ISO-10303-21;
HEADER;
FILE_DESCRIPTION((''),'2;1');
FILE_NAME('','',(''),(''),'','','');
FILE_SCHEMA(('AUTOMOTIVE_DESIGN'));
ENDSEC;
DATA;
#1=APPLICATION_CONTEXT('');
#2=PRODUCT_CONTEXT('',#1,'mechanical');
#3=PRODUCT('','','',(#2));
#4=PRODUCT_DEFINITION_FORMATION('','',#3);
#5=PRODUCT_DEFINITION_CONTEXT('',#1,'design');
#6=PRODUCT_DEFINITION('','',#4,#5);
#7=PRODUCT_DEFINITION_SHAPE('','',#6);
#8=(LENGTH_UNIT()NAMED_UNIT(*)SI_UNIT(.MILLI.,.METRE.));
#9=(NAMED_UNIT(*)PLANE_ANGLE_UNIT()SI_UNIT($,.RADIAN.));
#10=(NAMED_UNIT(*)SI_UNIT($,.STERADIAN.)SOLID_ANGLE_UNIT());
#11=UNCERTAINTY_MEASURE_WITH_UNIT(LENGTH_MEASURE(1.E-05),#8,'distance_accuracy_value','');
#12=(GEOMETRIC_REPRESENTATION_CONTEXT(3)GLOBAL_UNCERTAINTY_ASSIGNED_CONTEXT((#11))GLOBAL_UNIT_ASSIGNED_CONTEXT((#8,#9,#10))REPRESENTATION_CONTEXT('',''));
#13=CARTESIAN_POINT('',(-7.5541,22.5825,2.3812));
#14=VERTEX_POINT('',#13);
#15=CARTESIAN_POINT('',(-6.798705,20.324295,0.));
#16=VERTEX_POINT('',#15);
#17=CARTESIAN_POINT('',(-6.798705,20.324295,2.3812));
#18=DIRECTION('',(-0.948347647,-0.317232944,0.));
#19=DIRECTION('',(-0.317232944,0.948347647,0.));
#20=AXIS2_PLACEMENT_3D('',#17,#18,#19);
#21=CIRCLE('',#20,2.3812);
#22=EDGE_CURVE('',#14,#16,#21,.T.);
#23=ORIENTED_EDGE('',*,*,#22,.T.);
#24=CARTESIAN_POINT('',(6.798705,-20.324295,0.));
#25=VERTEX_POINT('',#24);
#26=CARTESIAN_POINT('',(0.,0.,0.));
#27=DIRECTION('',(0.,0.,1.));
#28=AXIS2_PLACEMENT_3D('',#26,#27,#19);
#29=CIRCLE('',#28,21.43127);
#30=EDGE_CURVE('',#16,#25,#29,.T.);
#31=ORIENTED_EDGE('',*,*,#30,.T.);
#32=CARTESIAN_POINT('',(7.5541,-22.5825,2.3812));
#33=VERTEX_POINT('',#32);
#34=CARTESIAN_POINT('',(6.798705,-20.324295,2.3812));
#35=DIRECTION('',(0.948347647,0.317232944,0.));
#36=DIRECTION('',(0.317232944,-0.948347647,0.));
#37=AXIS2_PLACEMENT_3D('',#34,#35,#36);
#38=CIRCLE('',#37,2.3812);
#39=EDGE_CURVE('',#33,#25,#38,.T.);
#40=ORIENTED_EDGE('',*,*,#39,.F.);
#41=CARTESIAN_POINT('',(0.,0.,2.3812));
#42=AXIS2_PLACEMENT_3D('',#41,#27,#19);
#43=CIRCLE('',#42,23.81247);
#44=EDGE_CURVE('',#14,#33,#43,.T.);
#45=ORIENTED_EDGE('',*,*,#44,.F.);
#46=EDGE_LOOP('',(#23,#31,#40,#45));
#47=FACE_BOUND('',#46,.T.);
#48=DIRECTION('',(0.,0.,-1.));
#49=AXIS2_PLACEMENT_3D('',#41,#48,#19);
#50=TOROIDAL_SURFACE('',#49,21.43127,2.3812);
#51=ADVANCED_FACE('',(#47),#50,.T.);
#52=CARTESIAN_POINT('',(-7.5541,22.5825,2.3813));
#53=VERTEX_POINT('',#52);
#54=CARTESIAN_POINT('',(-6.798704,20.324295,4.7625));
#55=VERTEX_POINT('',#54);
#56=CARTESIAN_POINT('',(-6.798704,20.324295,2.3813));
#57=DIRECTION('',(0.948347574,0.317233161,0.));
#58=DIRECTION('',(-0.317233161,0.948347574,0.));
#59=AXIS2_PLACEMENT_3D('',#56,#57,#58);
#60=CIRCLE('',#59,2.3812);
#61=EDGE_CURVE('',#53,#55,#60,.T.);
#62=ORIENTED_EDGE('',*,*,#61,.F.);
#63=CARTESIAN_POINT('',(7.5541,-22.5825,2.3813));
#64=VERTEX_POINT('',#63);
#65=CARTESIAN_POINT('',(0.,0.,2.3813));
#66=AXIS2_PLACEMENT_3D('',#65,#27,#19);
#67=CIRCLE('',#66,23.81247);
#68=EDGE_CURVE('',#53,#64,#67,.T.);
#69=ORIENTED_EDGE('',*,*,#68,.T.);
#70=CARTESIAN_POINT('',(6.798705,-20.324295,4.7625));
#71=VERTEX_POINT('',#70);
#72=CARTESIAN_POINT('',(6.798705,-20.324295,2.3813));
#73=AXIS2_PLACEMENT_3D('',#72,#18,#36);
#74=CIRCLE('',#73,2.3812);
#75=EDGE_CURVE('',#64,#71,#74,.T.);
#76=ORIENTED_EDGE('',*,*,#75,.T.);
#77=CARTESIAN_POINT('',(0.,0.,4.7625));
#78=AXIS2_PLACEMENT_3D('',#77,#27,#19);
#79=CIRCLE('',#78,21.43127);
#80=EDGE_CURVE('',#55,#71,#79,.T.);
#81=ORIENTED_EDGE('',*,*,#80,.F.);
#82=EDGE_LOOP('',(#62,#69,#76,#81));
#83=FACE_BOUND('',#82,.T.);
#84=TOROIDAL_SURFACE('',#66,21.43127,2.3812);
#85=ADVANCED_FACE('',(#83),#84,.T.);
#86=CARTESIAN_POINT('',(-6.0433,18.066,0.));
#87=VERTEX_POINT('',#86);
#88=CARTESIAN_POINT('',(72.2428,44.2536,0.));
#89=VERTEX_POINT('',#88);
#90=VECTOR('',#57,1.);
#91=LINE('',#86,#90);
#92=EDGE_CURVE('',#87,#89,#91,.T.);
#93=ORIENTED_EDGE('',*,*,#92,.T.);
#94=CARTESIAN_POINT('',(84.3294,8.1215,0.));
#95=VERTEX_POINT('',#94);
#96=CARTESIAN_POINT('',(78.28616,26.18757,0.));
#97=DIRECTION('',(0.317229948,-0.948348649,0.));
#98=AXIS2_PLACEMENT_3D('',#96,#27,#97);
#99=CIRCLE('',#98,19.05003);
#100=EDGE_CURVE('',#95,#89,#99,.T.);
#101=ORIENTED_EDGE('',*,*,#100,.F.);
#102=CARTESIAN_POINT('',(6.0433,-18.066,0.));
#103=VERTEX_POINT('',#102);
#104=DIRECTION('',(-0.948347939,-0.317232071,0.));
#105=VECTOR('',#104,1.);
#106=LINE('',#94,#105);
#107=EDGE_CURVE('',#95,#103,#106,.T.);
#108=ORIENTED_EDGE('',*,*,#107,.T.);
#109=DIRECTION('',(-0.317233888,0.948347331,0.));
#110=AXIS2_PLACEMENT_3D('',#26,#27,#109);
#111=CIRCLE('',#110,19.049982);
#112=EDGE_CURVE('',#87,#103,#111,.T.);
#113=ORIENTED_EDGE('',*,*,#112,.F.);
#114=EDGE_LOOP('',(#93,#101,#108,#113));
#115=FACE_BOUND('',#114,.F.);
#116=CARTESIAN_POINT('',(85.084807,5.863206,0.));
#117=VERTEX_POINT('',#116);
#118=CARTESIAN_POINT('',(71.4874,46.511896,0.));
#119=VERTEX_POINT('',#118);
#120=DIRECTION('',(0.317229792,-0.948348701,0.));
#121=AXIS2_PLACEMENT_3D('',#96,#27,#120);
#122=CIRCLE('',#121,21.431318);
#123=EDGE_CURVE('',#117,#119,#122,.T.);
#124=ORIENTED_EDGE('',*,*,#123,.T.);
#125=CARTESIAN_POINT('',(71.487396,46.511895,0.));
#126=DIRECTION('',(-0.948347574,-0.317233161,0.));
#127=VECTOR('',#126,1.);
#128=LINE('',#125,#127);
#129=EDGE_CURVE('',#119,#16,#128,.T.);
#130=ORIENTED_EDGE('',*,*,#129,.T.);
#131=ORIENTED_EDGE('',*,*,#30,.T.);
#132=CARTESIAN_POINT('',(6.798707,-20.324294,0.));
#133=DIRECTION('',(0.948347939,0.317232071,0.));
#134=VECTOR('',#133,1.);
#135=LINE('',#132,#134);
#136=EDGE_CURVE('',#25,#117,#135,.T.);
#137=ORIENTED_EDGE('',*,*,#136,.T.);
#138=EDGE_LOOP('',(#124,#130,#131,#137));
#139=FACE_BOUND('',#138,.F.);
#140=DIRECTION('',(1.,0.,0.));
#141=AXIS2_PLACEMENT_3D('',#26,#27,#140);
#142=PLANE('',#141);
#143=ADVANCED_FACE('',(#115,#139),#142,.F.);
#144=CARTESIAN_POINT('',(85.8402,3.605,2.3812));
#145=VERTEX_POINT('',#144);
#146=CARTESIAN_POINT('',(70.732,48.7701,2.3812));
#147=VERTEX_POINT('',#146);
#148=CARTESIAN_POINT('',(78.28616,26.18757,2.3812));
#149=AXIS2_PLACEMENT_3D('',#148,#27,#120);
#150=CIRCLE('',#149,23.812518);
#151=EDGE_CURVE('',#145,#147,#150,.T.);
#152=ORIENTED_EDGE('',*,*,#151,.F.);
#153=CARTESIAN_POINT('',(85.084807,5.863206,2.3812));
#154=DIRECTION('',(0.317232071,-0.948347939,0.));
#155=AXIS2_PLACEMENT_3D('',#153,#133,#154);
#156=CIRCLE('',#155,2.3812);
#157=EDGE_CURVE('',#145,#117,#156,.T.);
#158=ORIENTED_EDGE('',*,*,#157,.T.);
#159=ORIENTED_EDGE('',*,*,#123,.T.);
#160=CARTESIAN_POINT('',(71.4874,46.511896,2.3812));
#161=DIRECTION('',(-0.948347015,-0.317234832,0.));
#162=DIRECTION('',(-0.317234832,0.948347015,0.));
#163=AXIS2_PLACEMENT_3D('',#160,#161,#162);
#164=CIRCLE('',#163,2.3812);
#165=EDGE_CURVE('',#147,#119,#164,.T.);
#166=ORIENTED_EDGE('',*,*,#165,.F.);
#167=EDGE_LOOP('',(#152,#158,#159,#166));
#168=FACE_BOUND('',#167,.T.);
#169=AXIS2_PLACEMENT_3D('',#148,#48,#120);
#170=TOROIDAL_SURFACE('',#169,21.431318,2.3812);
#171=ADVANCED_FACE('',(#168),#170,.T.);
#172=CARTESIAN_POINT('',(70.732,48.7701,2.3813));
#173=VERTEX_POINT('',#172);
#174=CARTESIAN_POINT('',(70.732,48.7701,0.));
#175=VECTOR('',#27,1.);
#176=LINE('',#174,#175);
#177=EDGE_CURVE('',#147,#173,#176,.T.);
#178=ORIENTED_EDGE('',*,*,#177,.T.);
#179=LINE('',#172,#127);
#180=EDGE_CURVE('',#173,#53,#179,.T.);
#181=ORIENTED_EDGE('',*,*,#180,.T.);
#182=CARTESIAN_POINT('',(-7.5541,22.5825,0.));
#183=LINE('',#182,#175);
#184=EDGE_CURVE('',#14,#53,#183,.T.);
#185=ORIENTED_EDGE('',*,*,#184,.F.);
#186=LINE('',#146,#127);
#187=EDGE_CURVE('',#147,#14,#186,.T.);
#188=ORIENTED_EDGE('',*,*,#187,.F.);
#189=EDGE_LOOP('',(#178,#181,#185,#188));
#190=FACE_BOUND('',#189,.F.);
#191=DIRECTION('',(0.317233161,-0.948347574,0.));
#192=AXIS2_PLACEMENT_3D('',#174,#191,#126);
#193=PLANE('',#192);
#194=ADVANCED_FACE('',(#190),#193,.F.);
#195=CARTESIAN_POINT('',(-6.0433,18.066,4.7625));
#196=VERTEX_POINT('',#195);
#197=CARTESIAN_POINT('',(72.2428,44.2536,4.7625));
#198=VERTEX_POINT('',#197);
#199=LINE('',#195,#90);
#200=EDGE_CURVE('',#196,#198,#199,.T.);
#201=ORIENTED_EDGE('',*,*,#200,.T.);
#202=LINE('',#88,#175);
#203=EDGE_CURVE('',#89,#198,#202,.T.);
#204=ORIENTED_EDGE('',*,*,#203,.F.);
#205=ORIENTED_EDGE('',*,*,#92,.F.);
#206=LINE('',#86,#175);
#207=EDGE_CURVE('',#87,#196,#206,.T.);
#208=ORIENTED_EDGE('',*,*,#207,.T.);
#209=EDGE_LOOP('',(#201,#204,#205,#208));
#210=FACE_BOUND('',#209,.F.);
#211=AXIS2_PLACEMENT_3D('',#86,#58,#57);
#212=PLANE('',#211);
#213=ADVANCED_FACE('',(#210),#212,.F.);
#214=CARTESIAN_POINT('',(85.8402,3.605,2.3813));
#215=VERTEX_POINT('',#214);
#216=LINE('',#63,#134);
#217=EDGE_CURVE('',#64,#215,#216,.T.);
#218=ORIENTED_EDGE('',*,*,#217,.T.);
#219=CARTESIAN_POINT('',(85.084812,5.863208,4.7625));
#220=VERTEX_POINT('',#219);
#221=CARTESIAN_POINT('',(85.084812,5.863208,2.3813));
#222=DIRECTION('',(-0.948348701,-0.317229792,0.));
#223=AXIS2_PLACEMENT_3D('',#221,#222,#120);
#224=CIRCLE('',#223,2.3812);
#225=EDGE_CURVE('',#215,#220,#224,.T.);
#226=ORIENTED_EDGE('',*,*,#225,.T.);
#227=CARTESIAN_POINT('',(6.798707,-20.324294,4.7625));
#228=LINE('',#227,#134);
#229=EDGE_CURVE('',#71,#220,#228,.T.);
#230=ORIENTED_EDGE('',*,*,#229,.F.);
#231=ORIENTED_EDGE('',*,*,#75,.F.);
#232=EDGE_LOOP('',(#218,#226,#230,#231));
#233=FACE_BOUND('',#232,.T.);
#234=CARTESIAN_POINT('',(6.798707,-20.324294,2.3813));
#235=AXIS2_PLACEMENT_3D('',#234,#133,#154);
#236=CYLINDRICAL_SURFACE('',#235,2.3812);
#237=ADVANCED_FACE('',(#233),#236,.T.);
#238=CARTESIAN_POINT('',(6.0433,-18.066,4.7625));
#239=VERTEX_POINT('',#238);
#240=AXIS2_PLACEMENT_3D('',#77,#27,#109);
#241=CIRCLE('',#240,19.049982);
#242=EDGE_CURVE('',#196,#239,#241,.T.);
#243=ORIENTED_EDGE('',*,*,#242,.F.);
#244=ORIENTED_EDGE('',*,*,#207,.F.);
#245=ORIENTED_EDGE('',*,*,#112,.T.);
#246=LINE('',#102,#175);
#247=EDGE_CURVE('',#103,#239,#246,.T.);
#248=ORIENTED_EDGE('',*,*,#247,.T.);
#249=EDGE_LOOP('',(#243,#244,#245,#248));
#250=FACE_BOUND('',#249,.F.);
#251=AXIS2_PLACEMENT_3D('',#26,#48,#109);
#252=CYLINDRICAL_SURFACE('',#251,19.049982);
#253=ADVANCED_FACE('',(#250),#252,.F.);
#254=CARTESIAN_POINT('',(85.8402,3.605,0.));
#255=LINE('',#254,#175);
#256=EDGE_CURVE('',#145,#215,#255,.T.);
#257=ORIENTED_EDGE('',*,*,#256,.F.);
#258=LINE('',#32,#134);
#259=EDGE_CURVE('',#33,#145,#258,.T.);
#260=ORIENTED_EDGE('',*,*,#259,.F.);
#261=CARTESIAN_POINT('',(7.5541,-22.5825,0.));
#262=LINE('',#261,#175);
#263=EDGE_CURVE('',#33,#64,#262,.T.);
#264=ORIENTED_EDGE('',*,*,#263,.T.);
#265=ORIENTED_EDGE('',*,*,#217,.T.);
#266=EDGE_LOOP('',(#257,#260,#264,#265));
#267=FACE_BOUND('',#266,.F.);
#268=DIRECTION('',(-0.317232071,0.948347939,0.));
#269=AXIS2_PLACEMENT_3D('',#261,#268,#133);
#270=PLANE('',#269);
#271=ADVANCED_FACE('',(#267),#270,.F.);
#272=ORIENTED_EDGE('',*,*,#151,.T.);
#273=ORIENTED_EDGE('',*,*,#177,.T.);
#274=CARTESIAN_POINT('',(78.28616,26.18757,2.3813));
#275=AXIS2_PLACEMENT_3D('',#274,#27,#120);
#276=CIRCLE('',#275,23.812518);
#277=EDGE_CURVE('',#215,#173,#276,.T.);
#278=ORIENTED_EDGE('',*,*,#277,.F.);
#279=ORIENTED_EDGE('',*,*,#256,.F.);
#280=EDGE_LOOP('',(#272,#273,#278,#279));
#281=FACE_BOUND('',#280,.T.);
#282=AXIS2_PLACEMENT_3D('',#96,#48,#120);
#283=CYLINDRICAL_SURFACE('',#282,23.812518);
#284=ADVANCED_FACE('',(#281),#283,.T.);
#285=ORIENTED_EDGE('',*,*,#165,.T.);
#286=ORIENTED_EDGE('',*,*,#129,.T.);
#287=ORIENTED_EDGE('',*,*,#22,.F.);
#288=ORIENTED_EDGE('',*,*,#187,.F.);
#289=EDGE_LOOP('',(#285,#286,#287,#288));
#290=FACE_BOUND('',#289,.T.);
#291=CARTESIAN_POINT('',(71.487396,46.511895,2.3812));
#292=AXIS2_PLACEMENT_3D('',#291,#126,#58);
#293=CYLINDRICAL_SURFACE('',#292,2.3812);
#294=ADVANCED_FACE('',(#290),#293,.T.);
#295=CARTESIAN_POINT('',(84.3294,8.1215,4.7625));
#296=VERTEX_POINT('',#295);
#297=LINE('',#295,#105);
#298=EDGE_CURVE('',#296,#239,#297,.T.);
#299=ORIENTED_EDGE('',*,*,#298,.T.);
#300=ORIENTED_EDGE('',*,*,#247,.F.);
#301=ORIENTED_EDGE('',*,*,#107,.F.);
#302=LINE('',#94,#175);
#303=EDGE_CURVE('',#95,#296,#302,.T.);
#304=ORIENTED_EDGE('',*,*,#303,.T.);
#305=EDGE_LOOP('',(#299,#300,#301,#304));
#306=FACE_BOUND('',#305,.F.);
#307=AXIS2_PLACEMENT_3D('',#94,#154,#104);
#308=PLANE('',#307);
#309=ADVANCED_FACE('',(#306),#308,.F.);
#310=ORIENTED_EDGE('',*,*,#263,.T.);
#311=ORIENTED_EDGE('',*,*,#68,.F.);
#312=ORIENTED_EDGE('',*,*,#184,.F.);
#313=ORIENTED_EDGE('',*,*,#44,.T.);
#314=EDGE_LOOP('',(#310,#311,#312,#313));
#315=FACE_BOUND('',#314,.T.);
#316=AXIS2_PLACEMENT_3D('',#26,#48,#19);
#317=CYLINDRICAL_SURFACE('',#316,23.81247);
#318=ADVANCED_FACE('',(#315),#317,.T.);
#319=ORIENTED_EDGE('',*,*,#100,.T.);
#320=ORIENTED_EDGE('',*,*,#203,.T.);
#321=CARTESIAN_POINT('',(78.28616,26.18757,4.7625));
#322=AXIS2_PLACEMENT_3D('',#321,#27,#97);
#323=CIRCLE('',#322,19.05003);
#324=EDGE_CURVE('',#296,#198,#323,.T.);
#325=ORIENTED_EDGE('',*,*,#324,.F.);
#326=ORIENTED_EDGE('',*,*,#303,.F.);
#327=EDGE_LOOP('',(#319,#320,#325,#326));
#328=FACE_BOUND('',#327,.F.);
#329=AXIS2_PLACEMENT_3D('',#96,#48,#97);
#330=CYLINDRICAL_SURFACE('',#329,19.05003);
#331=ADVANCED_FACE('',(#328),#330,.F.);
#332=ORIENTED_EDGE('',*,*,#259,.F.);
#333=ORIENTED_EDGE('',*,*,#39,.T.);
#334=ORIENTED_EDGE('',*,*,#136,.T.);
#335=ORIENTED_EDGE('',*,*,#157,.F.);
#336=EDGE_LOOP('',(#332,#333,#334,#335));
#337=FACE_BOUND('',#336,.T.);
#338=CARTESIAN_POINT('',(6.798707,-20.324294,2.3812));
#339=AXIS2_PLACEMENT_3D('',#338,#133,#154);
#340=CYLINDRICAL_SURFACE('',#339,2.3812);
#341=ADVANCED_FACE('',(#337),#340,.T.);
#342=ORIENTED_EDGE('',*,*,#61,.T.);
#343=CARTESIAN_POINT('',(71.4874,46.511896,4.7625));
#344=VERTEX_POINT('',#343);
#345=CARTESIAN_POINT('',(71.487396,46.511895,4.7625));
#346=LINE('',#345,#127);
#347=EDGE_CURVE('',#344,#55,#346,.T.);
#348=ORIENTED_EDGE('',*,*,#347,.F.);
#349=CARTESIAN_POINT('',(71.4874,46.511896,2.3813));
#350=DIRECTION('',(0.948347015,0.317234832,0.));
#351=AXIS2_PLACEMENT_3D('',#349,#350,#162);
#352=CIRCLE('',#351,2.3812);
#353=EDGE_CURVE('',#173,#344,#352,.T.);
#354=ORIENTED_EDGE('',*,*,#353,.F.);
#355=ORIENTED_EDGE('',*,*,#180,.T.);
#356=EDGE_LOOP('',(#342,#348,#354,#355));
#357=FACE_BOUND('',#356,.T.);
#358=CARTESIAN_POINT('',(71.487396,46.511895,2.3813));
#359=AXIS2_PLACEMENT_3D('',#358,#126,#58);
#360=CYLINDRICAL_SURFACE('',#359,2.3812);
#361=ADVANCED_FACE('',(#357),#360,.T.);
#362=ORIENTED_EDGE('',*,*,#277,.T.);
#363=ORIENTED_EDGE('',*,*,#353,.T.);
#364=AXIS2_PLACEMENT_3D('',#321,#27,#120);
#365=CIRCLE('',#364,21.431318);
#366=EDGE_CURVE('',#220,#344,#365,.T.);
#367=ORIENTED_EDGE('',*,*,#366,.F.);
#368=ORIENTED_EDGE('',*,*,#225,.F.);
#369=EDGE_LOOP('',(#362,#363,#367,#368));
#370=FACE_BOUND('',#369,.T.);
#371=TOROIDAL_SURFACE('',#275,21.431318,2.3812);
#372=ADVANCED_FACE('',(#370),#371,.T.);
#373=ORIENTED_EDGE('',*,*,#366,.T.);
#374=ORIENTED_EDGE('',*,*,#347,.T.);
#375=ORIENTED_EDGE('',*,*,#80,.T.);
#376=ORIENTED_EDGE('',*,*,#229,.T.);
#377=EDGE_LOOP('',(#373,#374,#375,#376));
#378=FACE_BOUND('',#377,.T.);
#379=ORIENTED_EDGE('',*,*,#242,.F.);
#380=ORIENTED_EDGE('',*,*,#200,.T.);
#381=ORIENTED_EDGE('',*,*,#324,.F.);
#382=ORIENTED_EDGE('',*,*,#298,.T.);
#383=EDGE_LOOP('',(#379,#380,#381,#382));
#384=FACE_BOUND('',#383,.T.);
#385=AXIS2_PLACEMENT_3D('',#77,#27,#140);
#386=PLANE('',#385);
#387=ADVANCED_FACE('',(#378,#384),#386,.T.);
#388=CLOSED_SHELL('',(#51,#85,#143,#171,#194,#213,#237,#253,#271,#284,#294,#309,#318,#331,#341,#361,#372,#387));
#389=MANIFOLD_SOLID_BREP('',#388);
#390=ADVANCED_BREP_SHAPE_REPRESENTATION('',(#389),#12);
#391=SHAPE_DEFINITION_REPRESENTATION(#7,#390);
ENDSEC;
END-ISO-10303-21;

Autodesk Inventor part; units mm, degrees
ref_plane "YZ Plane" through (0, 0, 0) normal (1, 0, 0) x (0, 1, 0)
ref_plane "XZ Plane" through (0, 0, 0) normal (0, 1, 0) x (-1, 0, 0)
ref_plane "XY Plane" through (0, 0, 0) normal (0, 0, 1) x (1, 0, 0)
sketch "Sketch1" plane through (0, 0, 0) normal (0, 0, 1) x (1, 0, 0)
  arc A0 (-6.0433, 18.066) -> (6.0433, -18.066) centre (0, 0) ccw
  arc A1 (84.3294, 8.1215) -> (72.2428, 44.2536) centre (78.2861, 26.1876) ccw
  line L0 (-6.0433, 18.066) -> (72.2428, 44.2536)
  line L1 (84.3294, 8.1215) -> (6.0433, -18.066)
  arc A2 (-7.5541, 22.5825) -> (7.5541, -22.5825) centre (0, 0) ccw
  arc A3 (85.8402, 3.605) -> (70.732, 48.7701) centre (78.2861, 26.1876) ccw
  line L2 (7.5541, -22.5825) -> (85.8402, 3.605)
  line L3 (70.732, 48.7701) -> (-7.5541, 22.5825)
  dimension "d0" = 19.05
  dimension "d1" = 82.55
  dimension "d2" = 4.7625
extrude "Extrusion1" add sketch "Sketch1" along normal blind 4.7625
fillet "Fillet1" radius 2.3813 8 edges at (-22.5825, -7.5541, 0) (46.6972, -9.4887, 0) (100.8686, 33.7417, 0) (31.5889, 35.6763, 0) (100.8686, 33.7417, 4.7625) (46.6972, -9.4887, 4.7625) (-22.5825, -7.5541, 4.7625) (31.5889, 35.6763, 4.7625)
properties part number "Belt_HorizontalIntake_Front" material "High Density Polyethylene"
